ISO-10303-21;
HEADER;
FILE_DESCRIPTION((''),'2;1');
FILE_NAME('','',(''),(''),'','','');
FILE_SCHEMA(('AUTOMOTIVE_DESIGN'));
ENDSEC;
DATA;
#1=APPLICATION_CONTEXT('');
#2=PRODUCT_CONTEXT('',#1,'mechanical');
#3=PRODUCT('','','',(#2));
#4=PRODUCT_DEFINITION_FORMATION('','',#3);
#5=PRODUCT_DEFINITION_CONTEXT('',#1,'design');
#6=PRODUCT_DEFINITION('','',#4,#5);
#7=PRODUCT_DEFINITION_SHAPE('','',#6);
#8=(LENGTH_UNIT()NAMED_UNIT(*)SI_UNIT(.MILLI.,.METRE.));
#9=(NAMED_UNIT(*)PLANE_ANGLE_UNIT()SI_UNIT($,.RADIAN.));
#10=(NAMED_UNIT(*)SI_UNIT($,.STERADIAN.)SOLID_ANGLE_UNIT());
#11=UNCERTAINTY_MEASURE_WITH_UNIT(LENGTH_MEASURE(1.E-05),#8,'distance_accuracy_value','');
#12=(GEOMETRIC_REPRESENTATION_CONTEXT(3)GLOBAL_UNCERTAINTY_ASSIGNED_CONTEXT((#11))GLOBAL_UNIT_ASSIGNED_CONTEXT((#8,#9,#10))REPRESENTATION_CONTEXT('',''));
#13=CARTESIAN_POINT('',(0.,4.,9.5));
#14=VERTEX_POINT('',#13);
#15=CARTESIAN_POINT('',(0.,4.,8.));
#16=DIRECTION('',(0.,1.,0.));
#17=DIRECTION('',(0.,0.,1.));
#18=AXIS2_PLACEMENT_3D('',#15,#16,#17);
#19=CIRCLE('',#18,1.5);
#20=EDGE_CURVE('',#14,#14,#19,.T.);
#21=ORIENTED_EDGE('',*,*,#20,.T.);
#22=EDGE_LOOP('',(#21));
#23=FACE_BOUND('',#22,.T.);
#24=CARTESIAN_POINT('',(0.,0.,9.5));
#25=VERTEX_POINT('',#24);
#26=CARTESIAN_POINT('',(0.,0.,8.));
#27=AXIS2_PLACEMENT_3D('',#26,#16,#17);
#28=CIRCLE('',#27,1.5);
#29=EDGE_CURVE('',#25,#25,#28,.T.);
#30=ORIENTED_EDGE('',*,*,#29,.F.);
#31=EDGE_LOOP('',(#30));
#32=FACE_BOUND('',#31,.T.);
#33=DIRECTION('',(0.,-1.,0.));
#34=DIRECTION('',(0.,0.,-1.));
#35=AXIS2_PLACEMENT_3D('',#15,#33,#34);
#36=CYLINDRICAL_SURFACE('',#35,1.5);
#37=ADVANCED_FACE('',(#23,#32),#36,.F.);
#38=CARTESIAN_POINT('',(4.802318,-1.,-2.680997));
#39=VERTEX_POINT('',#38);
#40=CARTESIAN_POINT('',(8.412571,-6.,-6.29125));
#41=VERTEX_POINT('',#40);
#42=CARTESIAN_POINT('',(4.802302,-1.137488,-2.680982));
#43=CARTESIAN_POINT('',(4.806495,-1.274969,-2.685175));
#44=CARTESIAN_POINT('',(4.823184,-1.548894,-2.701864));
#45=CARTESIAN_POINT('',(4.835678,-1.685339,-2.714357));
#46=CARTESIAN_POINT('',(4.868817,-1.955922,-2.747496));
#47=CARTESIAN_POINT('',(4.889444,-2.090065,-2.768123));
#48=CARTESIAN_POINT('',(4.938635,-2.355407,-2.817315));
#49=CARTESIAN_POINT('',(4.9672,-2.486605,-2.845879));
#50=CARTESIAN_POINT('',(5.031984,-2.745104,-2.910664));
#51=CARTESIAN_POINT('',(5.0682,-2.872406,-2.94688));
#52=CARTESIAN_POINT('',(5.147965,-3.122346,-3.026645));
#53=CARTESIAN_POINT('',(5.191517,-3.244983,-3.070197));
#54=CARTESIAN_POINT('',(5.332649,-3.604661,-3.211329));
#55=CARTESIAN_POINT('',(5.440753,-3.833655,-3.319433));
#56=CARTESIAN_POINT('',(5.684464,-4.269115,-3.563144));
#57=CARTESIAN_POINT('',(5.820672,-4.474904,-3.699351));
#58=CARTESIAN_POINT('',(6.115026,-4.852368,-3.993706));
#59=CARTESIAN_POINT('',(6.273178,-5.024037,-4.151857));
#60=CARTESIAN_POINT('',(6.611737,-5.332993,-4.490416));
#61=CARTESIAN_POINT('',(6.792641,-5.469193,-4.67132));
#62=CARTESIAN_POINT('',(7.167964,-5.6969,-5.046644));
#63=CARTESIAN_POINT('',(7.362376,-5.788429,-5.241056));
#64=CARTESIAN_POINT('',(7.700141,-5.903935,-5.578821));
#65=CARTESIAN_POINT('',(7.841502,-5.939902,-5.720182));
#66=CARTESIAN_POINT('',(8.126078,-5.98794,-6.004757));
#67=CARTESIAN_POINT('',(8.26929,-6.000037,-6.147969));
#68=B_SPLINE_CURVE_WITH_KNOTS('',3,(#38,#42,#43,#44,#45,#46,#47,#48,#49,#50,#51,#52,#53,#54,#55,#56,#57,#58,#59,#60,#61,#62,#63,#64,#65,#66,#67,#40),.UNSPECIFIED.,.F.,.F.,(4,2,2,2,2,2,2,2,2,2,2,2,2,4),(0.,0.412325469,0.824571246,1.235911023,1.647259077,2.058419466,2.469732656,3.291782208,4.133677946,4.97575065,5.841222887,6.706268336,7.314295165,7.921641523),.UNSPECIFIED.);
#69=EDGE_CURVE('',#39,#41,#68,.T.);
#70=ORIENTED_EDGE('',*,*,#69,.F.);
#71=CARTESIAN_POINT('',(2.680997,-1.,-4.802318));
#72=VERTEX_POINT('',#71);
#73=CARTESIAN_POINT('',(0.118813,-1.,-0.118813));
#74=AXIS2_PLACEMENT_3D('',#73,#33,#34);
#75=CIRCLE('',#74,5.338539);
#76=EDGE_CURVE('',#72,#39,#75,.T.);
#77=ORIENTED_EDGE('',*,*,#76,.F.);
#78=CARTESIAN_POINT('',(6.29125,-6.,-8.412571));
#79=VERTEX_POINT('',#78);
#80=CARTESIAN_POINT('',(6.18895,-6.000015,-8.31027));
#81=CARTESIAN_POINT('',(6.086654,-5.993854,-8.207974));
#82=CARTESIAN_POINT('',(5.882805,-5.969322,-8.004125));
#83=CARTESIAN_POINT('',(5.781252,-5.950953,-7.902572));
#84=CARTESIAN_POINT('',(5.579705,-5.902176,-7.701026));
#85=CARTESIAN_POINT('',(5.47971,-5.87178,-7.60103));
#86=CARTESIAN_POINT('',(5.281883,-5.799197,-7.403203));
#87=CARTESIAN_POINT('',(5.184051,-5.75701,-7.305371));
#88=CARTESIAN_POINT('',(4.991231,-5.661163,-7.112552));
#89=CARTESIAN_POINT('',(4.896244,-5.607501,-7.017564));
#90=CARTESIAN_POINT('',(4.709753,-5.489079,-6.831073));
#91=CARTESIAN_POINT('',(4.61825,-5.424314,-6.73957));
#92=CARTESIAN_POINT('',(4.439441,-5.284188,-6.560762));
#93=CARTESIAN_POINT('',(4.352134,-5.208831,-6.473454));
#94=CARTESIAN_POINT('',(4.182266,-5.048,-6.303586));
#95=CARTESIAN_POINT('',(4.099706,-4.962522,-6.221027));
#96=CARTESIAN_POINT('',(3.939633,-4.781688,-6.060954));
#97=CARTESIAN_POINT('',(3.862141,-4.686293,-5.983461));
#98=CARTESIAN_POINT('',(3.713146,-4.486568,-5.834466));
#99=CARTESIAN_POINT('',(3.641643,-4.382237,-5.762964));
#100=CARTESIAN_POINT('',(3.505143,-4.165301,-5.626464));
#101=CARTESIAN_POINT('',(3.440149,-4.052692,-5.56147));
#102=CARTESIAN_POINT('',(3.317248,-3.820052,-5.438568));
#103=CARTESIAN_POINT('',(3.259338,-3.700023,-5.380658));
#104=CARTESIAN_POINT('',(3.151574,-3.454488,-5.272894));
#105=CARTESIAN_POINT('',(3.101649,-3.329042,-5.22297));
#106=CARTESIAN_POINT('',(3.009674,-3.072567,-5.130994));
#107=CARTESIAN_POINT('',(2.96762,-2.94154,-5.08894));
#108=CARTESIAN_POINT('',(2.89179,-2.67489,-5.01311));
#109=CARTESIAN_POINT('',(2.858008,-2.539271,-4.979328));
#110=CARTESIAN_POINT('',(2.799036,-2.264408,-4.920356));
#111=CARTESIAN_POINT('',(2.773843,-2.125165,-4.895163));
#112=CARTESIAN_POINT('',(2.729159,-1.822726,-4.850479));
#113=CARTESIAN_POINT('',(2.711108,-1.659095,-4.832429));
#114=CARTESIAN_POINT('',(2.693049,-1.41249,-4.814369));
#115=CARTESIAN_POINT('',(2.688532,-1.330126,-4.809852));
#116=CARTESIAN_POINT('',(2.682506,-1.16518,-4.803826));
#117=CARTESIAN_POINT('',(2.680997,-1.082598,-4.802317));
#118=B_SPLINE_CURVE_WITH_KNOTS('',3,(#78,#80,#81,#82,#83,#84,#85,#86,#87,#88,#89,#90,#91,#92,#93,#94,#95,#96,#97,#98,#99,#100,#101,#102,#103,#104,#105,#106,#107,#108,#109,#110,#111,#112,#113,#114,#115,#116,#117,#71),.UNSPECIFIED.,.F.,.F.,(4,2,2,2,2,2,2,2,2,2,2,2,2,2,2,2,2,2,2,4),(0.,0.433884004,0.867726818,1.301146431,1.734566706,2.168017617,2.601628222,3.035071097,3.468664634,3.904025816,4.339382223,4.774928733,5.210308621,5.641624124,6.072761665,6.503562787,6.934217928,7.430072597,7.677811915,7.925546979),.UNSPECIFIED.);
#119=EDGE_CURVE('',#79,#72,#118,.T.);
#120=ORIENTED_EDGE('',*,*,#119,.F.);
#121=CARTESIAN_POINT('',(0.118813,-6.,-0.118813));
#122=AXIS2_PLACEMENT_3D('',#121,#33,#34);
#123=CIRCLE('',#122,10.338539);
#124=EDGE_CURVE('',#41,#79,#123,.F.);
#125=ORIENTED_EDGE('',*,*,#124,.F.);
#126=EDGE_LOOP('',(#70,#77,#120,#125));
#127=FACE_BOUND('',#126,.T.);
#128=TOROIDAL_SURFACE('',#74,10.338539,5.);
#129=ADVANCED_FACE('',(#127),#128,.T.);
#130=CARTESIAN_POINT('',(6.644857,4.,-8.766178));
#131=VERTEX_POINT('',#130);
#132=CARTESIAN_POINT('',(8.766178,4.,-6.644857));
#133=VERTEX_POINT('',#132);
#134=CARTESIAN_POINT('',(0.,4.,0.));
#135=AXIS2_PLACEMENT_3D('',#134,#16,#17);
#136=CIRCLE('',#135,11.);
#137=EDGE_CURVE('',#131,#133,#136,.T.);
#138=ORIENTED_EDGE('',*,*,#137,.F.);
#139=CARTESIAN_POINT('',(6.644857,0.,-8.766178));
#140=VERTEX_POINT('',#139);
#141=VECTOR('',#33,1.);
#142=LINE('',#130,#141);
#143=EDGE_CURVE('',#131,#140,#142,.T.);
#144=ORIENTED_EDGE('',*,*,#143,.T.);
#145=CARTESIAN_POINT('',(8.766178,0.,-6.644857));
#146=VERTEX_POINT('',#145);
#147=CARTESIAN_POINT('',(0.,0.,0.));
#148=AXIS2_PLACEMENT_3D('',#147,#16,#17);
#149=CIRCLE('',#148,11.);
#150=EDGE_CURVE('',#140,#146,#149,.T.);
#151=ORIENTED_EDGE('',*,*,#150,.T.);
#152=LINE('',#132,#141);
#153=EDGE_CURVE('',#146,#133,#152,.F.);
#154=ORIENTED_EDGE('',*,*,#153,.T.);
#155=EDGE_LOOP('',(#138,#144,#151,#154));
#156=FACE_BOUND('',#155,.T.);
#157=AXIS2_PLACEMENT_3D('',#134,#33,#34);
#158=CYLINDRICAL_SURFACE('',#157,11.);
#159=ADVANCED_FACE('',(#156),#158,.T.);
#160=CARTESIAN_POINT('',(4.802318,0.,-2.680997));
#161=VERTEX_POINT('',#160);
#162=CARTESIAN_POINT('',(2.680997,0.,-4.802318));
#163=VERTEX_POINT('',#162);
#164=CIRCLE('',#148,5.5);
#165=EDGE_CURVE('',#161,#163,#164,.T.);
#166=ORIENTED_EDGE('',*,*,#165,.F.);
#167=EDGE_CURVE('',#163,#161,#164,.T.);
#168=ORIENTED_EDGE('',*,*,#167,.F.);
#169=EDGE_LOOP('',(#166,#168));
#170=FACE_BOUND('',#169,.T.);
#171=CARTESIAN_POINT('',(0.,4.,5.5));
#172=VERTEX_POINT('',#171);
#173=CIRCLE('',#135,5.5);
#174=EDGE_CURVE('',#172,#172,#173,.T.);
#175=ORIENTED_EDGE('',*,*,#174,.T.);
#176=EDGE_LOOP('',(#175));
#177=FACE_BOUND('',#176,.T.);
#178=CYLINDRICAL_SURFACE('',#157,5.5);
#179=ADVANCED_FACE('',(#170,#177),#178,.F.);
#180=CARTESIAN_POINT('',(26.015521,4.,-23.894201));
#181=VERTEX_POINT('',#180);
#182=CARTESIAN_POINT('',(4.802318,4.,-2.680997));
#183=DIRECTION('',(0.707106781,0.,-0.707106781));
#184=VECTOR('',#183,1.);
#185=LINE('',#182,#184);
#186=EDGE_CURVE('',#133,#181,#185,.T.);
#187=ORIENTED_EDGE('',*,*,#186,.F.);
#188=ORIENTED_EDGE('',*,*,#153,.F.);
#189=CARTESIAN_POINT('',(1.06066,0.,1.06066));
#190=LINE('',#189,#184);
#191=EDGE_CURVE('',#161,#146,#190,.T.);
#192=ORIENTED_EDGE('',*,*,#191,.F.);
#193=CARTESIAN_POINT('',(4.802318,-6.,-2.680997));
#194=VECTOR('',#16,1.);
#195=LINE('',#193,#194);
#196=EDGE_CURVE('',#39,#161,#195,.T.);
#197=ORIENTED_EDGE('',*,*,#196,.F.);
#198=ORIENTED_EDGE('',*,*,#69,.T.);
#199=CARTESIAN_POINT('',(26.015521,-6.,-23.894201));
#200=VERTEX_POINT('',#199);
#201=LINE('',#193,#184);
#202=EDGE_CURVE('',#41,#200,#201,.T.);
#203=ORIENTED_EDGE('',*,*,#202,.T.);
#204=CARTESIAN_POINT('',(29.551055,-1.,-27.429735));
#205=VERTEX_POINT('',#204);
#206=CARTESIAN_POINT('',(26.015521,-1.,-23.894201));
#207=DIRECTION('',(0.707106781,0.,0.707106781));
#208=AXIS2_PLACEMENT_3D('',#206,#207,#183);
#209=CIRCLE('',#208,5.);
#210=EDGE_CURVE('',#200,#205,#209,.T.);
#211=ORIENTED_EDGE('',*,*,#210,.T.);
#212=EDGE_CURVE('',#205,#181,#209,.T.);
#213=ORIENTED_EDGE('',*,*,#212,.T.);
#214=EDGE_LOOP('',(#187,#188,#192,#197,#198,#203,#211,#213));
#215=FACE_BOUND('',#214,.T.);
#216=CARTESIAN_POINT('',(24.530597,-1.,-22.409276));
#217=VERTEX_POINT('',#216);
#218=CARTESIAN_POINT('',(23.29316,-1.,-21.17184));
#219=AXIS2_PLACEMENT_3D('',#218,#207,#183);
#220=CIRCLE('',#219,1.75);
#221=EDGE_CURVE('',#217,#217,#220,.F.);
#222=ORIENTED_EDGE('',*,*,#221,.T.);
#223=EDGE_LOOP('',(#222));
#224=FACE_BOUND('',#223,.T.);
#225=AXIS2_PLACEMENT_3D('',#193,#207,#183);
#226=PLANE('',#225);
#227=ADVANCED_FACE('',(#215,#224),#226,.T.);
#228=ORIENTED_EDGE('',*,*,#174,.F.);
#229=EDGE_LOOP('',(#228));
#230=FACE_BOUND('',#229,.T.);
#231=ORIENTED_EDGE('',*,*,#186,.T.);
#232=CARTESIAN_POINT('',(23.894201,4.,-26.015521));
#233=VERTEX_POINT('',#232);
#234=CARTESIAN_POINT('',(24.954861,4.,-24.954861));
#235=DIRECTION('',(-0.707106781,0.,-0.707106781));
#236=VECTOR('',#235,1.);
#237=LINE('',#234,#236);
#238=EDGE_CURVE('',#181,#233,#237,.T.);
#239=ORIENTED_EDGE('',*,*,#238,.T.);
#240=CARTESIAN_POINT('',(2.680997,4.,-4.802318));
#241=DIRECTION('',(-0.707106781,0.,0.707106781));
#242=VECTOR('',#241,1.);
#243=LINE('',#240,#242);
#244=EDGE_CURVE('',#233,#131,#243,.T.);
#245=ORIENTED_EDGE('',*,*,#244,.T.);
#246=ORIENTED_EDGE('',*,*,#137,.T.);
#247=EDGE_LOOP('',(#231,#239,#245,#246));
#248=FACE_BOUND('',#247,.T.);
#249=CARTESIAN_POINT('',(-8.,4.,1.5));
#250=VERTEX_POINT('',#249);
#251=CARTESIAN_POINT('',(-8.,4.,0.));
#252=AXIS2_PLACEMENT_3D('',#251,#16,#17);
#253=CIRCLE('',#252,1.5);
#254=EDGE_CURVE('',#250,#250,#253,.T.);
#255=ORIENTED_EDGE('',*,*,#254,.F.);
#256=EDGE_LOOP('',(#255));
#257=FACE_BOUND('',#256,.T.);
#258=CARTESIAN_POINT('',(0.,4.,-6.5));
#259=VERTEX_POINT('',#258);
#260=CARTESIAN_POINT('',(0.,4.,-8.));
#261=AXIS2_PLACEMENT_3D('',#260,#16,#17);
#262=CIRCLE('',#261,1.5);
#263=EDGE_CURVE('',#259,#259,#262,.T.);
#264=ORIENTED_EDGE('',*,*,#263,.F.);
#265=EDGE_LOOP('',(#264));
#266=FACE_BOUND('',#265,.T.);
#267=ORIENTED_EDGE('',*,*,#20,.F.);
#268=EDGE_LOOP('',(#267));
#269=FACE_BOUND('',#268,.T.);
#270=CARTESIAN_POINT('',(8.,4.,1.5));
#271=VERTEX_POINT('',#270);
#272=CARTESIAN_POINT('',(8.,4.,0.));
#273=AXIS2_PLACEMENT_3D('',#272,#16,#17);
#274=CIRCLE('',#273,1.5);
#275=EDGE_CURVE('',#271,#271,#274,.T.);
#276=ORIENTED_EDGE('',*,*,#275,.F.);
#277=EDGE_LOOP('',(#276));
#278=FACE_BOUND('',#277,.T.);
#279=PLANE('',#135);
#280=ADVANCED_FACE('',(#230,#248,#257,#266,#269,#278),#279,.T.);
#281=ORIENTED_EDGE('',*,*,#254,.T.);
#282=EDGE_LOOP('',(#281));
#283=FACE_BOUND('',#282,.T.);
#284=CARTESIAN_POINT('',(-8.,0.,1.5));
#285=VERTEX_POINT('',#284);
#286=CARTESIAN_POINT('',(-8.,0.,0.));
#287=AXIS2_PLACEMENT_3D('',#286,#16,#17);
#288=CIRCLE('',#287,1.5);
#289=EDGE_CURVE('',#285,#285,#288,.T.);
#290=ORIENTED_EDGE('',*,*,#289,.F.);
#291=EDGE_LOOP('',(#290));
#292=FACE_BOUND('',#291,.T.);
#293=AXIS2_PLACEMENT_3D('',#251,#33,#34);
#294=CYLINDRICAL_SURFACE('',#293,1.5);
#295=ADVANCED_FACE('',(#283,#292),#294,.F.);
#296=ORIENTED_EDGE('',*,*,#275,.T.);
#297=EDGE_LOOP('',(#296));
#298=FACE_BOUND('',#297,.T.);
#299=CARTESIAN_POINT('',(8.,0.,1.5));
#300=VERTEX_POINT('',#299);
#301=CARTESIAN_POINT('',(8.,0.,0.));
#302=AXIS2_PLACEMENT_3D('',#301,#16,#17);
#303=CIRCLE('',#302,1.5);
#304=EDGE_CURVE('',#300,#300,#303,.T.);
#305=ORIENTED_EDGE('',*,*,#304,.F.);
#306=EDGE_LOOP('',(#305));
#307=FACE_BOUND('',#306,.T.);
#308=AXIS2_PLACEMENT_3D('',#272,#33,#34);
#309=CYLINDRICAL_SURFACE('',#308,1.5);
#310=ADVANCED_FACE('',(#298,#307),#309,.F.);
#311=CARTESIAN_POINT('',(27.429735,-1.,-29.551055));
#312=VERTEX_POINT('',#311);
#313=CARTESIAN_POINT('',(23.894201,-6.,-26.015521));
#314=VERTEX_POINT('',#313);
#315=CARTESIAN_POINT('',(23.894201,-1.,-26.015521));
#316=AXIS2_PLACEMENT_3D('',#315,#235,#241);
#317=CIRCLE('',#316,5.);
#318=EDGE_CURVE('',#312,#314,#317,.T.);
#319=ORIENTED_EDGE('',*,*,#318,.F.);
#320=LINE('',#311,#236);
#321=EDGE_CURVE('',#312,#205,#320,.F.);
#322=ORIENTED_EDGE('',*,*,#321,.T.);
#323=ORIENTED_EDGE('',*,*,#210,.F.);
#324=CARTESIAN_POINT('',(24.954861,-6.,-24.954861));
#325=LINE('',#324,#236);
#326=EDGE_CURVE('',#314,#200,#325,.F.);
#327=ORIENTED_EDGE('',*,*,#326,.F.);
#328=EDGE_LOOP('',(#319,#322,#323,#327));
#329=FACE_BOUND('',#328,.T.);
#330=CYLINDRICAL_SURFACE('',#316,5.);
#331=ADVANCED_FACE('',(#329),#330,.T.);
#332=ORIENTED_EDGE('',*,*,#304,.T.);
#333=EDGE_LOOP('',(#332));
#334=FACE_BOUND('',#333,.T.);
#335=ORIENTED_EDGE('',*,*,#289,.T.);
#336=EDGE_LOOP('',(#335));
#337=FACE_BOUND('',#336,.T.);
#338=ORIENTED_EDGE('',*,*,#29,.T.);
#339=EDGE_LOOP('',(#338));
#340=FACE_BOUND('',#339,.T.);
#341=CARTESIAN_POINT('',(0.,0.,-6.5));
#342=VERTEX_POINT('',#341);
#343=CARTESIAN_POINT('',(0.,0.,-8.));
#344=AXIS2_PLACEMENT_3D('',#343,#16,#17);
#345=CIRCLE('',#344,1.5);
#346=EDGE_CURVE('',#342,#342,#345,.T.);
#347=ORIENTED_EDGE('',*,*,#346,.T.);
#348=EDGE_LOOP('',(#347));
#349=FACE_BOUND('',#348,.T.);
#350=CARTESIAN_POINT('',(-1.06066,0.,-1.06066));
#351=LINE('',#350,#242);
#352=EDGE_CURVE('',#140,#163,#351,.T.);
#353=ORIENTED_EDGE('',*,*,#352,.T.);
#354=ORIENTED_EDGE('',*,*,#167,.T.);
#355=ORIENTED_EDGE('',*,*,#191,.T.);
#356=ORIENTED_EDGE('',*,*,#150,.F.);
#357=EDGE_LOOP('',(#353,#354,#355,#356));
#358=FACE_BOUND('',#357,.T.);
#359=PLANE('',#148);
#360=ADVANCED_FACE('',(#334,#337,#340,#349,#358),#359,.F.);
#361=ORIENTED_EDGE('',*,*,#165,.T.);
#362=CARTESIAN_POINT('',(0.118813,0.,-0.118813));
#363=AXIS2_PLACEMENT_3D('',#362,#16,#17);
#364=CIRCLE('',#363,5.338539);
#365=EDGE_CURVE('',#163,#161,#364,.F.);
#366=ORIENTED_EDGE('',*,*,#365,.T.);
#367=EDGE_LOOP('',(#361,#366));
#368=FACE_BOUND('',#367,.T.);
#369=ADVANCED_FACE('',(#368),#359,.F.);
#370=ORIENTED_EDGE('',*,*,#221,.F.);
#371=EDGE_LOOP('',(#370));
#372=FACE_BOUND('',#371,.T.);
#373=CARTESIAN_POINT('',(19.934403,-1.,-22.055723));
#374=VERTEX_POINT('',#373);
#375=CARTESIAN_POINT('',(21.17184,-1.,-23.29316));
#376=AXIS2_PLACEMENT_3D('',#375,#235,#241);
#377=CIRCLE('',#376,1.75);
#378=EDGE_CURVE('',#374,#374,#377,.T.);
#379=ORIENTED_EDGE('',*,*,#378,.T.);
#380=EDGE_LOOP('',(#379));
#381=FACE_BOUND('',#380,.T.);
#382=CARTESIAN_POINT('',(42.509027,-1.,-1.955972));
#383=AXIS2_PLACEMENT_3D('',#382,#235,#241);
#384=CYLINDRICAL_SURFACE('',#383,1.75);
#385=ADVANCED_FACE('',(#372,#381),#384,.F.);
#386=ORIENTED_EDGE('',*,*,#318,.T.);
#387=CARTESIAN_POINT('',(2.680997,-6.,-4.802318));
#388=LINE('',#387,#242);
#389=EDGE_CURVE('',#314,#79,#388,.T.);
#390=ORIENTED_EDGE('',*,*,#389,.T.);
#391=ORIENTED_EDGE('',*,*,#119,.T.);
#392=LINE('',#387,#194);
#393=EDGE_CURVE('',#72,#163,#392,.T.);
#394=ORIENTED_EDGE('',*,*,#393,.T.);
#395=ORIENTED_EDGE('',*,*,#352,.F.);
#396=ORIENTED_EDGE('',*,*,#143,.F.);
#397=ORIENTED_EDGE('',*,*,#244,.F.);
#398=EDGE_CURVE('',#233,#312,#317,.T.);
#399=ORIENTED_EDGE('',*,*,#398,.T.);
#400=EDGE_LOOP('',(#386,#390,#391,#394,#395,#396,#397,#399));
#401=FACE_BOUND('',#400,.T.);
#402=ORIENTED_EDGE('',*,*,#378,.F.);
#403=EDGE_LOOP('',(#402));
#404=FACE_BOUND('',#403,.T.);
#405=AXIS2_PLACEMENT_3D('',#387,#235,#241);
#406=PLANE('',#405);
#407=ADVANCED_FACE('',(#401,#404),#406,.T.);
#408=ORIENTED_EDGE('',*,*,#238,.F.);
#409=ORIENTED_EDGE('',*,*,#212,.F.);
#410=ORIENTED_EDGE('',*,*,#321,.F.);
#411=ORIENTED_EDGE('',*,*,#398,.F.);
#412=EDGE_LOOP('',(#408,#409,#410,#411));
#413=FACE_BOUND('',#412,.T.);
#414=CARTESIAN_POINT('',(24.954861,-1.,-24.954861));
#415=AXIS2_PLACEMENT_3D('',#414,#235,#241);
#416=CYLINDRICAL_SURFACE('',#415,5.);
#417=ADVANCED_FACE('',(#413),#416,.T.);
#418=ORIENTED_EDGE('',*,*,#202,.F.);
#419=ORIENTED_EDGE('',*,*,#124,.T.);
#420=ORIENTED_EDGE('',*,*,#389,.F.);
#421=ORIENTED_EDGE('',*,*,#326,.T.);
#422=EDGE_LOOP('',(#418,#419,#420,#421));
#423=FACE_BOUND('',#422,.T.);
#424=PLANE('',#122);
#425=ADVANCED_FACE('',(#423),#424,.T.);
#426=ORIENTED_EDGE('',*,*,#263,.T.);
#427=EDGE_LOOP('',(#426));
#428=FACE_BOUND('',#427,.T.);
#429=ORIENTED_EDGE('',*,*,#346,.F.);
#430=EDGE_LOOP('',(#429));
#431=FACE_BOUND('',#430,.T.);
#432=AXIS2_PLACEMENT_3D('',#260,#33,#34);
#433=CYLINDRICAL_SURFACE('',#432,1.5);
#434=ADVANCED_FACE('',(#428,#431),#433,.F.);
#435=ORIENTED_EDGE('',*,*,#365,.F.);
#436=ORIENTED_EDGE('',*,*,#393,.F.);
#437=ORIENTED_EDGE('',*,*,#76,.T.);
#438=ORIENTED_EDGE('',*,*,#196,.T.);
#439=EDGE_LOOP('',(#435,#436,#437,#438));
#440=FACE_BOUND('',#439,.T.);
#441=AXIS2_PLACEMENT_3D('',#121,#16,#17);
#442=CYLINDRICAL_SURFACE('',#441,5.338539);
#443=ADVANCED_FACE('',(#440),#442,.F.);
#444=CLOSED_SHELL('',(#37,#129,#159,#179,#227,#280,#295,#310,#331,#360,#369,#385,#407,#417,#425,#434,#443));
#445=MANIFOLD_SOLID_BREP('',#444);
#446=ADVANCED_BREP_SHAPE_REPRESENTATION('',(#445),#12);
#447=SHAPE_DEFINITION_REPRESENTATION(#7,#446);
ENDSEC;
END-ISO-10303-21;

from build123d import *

# Parameters (mm, degrees)
CROQUIS1_R              = 11
CROQUIS1_R_2            = 5.5
CROQUIS1_R_3            = 1.5
SALIENTE_EXTRUIR1_DEPTH = 4
SALIENTE_EXTRUIR2_DEPTH = 10
CORTAR_EXTRUIR1_REACH   = 44.247
CROQUIS3_R              = 1.75
REDONDEO1_R             = 5


with BuildPart() as part:
    # Croquis1 → Saliente-Extruir1 (new body)
    with BuildSketch(Plane(origin=(0, 0, 0), x_dir=(1, 0, 0), z_dir=(0, 1, 0))):
        with Locations(Location((0, 0, 0), (0, 0, 270))):
            Circle(CROQUIS1_R)
        with Locations(Location((0, 0, 0), (0, 0, 270))):
            Circle(CROQUIS1_R_2, mode=Mode.SUBTRACT)
        with Locations(Location((-8, 0, 0), (0, 0, 270))):
            Circle(CROQUIS1_R_3, mode=Mode.SUBTRACT)
        with Locations(Location((0, 8, 0), (0, 0, 270))):
            Circle(CROQUIS1_R_3, mode=Mode.SUBTRACT)
        with Locations(Location((8, 0, 0), (0, 0, 270))):
            Circle(CROQUIS1_R_3, mode=Mode.SUBTRACT)
        with Locations(Location((0, -8, 0), (0, 0, 270))):
            Circle(CROQUIS1_R_3, mode=Mode.SUBTRACT)
    extrude(amount=SALIENTE_EXTRUIR1_DEPTH)

    # Croquis2 → Saliente-Extruir2 (add)
    with BuildSketch(Plane(origin=(0, 4, 0), x_dir=(1, 0, 0), z_dir=(0, 1, 0))):
        with BuildLine():
            Line((2.680997215, 4.802317559), (27.429734557, 29.5510549))
            Line((27.429734557, 29.5510549), (29.5510549, 27.429734557))
            Line((29.5510549, 27.429734557), (4.802317559, 2.680997215))
            ThreePointArc((4.802317559, 2.680997215), (3.893730418, 3.893730418), (2.680997215, 4.802317559))
        make_face()
    extrude(amount=-SALIENTE_EXTRUIR2_DEPTH)

    # Croquis3 → Cortar-Extruir1 (cut, up to next)
    with BuildSketch(Plane(origin=(-1.060660172, 0, -1.060660172), x_dir=(-0.7071067811865465, 0, 0.7071067811865486), z_dir=(-0.7071067811865486, 0, -0.7071067811865465)), mode=Mode.PRIVATE) as cortar_extruir1_sk1:
        with Locations((-31.441502622, -1)):
            Circle(CROQUIS3_R)
    cortar_extruir1_tool1 = extrude(cortar_extruir1_sk1.sketch, amount=-CORTAR_EXTRUIR1_REACH, mode=Mode.PRIVATE) & part.part
    add(cortar_extruir1_tool1.solids().sort_by_distance((21.17184, -1, -23.29316))[0], mode=Mode.SUBTRACT)

    # Redondeo1
    redondeo1_edges = [part.edges().sort_by_distance(p)[0] for p in [
        (3.893730418, -6, -3.893730418),
        (28.490394728, -6, -28.490394728),
        (28.490394728, 4, -28.490394728),
    ]]
    fillet(redondeo1_edges, radius=REDONDEO1_R - 0.0001)  # a hair under: the kernel refuses the full size


solid = part.part
